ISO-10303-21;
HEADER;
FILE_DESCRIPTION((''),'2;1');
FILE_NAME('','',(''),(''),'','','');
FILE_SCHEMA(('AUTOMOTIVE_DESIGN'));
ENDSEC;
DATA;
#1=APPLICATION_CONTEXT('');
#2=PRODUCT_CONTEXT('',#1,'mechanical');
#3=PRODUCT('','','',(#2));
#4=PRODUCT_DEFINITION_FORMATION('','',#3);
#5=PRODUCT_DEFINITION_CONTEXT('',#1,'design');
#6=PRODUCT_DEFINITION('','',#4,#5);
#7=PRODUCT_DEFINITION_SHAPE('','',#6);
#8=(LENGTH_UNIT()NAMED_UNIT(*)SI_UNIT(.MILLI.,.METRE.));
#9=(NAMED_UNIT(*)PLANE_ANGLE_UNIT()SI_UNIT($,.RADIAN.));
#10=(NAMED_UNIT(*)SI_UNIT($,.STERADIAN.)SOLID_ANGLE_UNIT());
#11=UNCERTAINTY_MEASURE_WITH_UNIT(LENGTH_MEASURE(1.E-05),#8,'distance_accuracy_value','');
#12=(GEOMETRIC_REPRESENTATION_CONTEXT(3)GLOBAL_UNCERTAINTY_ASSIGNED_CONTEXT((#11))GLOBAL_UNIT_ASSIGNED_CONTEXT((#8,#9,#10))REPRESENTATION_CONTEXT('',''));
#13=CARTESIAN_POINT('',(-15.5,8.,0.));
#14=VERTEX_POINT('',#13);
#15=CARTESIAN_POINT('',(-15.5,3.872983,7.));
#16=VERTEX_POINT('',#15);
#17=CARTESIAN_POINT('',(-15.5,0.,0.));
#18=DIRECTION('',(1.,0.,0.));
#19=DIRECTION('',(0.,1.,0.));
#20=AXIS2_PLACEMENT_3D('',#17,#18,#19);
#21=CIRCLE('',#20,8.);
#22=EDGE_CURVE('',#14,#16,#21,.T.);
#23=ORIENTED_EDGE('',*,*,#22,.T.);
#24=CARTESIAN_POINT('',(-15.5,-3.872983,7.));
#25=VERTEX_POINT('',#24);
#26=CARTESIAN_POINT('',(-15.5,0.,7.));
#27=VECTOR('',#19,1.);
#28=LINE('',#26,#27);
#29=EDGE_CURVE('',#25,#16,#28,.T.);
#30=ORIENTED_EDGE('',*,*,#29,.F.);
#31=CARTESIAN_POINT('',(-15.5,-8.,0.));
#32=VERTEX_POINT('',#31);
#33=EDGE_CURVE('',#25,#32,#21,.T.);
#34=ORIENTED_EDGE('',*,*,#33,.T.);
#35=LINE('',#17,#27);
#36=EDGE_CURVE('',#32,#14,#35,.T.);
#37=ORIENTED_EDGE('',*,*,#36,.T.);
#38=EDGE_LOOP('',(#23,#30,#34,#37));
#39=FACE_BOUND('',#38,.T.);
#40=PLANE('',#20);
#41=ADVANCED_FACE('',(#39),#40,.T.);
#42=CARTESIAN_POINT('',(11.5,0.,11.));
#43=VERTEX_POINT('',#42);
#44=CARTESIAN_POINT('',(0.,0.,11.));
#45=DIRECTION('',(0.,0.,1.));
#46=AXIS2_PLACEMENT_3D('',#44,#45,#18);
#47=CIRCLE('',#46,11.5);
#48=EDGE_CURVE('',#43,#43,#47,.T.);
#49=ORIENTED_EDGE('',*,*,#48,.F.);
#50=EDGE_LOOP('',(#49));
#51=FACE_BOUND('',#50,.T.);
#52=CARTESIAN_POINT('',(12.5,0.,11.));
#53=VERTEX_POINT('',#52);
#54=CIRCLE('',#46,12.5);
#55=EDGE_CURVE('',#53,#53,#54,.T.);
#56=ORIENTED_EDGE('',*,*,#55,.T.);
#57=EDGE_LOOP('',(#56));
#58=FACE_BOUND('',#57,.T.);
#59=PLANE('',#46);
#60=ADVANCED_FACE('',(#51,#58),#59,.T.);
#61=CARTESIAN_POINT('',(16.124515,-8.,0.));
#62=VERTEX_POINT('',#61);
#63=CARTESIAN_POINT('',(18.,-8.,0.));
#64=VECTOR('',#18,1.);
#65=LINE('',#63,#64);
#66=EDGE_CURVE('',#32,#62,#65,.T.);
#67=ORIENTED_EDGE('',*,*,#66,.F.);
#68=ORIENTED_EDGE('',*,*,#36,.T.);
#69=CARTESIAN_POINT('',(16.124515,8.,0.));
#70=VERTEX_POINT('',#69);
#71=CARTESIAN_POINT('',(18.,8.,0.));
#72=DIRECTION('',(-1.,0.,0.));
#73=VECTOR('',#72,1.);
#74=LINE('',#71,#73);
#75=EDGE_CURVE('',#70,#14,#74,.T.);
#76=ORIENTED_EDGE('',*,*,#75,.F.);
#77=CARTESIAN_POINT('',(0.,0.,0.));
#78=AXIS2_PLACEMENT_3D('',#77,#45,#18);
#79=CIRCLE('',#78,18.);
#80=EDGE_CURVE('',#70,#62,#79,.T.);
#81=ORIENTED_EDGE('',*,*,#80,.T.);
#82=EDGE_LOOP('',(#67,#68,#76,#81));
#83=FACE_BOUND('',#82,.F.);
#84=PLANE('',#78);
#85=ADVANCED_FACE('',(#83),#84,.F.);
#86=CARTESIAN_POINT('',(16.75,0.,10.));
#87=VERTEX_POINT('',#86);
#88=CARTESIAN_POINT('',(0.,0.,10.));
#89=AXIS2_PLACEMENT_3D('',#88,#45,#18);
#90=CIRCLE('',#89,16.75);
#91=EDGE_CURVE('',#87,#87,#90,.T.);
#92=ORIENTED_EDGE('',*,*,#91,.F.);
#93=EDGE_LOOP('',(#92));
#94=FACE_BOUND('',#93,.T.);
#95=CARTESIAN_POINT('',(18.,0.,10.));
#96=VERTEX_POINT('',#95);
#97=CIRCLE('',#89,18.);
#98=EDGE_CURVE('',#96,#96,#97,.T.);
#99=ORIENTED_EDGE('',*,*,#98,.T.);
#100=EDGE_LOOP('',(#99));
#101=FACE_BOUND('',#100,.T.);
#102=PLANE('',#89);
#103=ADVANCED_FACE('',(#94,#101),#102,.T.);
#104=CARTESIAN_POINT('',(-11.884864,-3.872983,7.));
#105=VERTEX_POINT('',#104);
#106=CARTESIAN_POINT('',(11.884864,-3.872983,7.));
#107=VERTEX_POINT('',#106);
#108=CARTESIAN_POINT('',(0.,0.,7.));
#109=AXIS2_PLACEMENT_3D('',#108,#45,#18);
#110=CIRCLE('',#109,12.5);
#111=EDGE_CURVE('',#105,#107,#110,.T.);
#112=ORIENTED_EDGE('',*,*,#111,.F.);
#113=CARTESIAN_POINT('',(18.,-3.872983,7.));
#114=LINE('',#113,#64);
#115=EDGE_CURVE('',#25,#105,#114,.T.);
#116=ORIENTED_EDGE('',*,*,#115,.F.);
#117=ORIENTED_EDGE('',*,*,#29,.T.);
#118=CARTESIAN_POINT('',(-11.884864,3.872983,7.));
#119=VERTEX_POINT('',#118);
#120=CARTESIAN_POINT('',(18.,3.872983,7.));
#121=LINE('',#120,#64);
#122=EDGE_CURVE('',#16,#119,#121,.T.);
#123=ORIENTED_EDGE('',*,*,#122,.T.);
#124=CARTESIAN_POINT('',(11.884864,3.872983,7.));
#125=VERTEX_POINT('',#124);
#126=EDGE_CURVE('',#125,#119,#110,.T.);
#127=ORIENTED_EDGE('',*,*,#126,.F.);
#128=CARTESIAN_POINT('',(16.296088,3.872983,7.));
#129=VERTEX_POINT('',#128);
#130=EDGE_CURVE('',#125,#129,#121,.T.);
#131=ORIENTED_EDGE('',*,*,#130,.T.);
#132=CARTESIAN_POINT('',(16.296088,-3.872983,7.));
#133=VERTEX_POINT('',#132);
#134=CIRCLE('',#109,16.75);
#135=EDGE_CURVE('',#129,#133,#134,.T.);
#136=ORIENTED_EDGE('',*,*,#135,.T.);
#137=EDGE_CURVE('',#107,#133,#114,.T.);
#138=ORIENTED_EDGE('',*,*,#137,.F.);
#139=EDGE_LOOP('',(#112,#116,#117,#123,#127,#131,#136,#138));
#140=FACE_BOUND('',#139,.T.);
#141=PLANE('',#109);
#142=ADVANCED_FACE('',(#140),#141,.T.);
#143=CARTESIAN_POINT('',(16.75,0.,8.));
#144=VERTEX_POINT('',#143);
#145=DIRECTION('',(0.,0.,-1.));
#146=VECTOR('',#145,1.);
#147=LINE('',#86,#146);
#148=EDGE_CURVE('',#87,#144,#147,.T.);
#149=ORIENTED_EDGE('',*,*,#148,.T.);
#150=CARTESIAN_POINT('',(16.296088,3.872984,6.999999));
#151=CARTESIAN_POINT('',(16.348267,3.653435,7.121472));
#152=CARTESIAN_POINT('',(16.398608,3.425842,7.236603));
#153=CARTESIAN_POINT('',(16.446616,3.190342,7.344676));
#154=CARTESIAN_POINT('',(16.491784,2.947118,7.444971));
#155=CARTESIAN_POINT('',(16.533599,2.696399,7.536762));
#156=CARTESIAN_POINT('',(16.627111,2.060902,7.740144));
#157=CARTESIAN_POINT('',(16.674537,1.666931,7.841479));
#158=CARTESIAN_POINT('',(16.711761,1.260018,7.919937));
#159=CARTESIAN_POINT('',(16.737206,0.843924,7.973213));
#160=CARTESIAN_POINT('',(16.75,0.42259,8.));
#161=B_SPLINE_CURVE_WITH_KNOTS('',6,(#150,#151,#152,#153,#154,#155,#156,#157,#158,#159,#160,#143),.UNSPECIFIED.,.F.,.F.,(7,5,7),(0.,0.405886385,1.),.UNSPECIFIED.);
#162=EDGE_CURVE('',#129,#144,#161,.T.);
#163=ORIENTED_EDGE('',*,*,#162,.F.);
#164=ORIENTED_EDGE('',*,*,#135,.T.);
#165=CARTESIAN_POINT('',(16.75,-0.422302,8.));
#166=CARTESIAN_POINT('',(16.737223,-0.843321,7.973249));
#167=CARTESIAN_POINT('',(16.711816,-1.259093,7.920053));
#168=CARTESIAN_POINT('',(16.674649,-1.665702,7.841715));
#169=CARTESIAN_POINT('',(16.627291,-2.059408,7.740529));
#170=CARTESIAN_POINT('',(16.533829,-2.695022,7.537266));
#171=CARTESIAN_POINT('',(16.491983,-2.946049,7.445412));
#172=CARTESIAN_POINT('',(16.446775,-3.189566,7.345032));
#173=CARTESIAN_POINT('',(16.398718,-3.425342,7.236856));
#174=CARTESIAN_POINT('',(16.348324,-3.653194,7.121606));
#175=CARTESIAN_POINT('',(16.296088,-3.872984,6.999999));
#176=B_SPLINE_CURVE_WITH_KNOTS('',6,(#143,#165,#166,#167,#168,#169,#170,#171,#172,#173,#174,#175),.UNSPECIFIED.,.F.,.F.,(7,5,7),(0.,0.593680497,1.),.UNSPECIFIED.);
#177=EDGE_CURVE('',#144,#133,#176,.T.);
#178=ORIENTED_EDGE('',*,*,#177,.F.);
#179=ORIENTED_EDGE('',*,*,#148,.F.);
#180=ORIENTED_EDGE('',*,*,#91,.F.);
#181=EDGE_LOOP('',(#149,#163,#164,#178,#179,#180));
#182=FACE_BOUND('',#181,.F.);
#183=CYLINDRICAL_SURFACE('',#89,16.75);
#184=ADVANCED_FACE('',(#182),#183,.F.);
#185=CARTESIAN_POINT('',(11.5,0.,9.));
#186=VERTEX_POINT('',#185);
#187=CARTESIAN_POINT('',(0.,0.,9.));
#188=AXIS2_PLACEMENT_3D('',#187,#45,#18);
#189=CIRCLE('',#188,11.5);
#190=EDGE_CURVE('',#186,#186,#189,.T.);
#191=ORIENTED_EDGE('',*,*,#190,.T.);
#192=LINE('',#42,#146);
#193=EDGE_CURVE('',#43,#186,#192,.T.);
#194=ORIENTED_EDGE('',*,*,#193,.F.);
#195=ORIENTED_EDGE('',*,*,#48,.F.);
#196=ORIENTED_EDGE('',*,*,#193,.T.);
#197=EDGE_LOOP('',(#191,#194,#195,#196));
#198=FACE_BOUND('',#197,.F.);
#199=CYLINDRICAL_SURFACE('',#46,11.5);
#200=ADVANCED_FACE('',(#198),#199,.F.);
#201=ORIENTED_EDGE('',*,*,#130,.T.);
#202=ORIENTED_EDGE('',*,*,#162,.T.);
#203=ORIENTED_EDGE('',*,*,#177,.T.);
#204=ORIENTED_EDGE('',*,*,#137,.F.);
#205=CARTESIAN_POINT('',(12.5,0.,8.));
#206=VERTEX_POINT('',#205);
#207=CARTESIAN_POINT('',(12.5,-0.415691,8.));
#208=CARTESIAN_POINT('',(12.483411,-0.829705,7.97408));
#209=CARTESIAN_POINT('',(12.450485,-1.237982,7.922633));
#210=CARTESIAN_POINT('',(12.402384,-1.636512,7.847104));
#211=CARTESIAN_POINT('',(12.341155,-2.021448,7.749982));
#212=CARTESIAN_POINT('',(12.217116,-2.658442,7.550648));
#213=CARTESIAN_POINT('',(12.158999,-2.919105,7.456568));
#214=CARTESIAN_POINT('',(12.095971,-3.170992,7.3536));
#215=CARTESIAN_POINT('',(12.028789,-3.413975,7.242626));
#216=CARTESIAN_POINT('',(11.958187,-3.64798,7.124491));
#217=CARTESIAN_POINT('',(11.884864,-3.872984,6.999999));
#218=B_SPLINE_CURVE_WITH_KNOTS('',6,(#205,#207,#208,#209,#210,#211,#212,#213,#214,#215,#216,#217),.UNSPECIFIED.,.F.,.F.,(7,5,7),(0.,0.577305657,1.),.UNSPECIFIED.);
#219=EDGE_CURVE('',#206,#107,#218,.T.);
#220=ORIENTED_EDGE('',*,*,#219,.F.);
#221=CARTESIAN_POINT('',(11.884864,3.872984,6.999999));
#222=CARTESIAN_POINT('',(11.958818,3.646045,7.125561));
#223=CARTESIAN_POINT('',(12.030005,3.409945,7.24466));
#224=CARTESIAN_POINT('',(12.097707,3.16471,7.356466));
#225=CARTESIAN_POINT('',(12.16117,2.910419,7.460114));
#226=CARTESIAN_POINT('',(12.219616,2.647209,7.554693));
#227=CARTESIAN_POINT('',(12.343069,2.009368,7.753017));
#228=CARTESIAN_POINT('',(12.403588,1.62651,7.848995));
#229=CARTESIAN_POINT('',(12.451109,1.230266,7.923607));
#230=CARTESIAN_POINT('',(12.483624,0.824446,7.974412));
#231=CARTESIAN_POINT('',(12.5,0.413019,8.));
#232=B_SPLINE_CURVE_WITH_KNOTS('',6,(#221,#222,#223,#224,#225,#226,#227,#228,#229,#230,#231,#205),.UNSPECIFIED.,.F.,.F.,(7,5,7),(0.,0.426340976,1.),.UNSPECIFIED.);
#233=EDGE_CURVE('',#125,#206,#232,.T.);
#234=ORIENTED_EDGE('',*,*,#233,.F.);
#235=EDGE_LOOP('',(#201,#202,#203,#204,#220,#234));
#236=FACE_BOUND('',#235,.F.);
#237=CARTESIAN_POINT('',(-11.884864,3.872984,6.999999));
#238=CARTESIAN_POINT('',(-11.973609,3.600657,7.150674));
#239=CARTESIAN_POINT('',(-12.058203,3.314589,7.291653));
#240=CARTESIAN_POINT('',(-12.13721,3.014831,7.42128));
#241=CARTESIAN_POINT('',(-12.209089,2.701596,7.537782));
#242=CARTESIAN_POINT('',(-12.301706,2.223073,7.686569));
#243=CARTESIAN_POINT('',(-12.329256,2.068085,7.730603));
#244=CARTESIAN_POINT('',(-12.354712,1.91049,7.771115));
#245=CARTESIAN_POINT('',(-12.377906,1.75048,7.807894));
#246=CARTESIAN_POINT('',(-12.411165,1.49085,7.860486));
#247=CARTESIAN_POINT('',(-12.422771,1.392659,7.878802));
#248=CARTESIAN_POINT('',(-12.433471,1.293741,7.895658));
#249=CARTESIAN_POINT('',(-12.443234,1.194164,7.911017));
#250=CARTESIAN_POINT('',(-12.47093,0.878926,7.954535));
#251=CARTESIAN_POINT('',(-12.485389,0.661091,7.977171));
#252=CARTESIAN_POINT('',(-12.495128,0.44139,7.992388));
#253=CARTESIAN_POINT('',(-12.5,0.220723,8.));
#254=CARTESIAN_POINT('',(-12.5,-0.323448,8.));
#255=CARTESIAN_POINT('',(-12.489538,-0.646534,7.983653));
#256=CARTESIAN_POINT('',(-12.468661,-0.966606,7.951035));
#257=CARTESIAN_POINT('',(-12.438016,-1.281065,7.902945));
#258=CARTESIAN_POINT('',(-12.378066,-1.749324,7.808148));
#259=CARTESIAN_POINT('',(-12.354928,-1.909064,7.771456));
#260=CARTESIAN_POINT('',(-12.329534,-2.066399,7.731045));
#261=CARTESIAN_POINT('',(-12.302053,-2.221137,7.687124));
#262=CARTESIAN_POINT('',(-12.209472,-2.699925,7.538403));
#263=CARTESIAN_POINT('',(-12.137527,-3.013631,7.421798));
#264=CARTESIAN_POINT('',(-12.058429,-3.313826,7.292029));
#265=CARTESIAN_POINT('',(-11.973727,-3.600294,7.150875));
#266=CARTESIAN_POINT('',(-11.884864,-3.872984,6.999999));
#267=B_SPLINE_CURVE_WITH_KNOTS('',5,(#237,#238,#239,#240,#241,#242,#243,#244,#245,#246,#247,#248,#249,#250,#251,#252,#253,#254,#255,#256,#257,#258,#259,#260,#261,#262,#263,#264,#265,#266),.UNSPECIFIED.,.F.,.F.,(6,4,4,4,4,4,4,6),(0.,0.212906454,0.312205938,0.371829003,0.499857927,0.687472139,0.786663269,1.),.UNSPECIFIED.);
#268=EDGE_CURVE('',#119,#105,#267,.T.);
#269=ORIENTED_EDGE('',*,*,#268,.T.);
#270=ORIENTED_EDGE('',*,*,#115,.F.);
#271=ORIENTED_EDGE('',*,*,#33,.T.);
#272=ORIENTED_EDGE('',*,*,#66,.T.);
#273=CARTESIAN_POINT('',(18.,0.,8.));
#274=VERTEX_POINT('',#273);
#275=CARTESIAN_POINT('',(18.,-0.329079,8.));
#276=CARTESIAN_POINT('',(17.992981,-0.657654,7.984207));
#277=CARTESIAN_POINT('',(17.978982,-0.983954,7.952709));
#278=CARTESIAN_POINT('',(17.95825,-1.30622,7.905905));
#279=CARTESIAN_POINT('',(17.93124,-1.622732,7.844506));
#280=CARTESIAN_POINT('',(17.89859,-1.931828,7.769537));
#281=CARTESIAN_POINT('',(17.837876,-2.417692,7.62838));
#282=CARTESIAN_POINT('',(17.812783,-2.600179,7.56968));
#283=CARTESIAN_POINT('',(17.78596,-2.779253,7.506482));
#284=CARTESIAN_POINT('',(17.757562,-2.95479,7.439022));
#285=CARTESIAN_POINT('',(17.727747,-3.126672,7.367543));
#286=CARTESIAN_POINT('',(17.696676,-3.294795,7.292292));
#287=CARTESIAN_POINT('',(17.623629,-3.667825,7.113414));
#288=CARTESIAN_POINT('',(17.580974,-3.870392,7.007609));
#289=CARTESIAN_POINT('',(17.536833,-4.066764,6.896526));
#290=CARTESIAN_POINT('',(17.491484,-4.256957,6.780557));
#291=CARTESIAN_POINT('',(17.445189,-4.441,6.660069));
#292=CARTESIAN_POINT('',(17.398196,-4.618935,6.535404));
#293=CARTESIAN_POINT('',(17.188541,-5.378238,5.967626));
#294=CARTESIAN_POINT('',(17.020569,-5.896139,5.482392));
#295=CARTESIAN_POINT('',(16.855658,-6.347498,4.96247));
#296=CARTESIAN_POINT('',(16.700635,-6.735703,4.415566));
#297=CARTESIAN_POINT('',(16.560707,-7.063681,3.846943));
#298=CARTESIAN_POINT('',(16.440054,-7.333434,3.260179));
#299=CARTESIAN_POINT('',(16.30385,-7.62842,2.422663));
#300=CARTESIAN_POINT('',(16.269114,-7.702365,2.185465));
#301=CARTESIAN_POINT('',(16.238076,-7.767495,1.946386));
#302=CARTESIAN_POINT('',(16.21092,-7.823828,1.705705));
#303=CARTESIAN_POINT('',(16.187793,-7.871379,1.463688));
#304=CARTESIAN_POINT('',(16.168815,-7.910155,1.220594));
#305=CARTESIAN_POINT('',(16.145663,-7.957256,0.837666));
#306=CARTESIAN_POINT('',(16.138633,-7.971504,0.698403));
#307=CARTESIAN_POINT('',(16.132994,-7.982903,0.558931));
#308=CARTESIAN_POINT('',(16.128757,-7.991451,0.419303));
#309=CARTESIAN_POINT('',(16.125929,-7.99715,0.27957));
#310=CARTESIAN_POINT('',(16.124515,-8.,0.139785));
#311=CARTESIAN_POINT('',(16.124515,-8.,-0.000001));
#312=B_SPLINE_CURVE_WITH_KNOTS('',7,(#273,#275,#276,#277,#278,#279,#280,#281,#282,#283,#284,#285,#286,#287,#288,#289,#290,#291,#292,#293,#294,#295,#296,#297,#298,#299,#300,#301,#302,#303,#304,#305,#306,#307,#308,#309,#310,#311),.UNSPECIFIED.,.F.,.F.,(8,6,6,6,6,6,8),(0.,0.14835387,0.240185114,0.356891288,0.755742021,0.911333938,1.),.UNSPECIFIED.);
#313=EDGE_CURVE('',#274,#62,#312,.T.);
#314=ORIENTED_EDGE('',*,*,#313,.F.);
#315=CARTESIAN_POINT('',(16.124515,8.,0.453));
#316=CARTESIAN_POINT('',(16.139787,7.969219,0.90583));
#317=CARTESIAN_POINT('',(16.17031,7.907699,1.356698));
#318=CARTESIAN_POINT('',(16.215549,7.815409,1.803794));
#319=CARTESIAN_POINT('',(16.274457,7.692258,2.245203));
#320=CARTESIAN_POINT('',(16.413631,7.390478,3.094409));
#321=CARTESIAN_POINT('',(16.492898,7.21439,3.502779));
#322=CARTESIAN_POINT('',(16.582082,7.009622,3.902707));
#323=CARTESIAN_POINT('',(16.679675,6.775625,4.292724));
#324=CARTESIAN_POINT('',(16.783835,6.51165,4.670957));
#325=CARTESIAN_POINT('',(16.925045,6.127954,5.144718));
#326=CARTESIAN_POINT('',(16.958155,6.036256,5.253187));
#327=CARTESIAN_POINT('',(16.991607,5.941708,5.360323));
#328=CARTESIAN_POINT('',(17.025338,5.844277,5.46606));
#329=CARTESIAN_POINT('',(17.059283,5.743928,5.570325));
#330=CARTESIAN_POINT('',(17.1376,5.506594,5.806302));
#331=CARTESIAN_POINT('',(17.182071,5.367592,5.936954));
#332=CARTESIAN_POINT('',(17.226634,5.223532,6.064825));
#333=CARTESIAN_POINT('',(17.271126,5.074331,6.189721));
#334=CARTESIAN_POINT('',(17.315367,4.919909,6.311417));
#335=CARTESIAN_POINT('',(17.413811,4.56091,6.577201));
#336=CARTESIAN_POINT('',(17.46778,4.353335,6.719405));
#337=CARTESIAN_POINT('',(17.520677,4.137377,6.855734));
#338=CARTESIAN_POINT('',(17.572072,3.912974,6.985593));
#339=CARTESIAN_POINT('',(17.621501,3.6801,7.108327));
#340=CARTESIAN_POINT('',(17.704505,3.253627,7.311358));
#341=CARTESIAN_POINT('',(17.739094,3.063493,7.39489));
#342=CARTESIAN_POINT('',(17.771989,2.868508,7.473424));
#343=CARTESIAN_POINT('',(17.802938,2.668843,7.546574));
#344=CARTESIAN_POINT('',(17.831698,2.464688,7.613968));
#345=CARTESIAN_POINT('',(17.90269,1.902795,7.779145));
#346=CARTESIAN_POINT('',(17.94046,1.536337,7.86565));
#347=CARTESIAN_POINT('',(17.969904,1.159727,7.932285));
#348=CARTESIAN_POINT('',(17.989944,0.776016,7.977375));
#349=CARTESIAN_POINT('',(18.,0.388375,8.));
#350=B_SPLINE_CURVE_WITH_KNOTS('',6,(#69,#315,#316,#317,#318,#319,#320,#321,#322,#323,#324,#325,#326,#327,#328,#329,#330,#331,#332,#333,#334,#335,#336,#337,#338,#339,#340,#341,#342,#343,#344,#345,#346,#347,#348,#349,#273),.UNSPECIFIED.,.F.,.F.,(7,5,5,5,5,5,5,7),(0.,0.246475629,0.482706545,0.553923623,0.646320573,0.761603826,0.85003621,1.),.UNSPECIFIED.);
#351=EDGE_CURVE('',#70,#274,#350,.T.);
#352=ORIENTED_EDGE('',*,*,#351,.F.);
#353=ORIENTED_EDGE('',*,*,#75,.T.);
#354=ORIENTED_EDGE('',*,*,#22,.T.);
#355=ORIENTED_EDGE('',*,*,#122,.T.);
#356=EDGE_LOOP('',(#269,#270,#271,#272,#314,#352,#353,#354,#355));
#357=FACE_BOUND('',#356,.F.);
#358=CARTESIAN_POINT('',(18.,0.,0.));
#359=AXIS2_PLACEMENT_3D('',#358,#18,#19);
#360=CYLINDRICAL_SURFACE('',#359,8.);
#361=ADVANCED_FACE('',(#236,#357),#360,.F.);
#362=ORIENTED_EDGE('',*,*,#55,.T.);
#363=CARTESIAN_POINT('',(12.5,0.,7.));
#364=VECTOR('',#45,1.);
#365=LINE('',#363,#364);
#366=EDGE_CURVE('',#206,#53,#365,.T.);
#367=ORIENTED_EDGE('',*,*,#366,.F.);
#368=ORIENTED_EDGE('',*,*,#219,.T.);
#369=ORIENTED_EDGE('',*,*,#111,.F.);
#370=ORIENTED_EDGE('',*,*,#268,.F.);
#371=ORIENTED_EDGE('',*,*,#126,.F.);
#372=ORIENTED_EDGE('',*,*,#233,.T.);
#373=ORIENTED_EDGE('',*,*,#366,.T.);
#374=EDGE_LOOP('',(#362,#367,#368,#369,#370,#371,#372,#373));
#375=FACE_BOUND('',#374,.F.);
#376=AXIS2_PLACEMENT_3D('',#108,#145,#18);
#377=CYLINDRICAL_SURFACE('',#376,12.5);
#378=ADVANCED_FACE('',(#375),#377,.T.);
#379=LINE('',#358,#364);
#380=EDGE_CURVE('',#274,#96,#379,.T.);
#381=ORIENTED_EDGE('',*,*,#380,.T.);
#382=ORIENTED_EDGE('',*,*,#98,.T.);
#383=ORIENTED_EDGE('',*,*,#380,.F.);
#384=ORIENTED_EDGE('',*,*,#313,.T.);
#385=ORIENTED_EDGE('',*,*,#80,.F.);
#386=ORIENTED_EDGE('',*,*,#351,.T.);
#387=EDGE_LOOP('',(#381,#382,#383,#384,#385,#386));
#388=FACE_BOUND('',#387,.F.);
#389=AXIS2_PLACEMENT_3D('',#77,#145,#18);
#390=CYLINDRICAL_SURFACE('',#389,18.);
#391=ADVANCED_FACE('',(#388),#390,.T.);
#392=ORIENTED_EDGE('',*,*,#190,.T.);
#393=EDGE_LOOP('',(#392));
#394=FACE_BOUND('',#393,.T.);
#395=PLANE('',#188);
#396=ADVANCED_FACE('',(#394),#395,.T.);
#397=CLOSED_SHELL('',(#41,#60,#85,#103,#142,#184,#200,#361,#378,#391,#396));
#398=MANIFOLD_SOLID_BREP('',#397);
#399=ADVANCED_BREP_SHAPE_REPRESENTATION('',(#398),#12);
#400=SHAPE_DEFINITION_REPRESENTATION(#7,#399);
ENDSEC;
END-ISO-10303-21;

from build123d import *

# Parameters (mm, degrees)
F0_R      = 18
F0_R_2    = 16.75
F0_R_3    = 12.5
F0_R_4    = 11.5
F1_DEPTH  = 10
F2_R      = 16.75
F3_DEPTH  = 3
F4_R      = 12.5
F5_DEPTH  = 4
F6_R      = 11.5
F7_DEPTH  = 2
F9_R      = 8
F10_DEPTH = 33.5


# Not quite as in the source:
# - the program builds the solid bodies; features that only make, move or delete a surface that nothing else refers to are left out


with BuildPart() as f1:
    # F0 (on Top) → F1 (new body)
    with BuildSketch(Plane.XY):
        Circle(F0_R)
        Circle(F0_R_2, mode=Mode.SUBTRACT)
        Circle(F0_R_2)
        Circle(F0_R_3, mode=Mode.SUBTRACT)
        Circle(F0_R_3)
        Circle(F0_R_4, mode=Mode.SUBTRACT)
        Circle(F0_R_4)
    extrude(amount=F1_DEPTH)

    # F2 (on face) → F3 (cut)
    with BuildSketch(Plane.XY.offset(10)):
        Circle(F2_R)
    extrude(amount=-F3_DEPTH, mode=Mode.SUBTRACT)

    # F4 (on face) → F5 (join)
    with BuildSketch(Plane.XY.offset(7)):
        Circle(F4_R)
    extrude(amount=F5_DEPTH)

    # F6 (on face) → F7 (cut)
    with BuildSketch(Plane.XY.offset(11)):
        Circle(F6_R)
    extrude(amount=-F7_DEPTH, mode=Mode.SUBTRACT)

    # F9 (on offset) → F10 (cut)
    with BuildSketch(Plane.YZ.offset(18)):
        Circle(F9_R)
    extrude(amount=-F10_DEPTH, mode=Mode.SUBTRACT)


solid = f1.part
